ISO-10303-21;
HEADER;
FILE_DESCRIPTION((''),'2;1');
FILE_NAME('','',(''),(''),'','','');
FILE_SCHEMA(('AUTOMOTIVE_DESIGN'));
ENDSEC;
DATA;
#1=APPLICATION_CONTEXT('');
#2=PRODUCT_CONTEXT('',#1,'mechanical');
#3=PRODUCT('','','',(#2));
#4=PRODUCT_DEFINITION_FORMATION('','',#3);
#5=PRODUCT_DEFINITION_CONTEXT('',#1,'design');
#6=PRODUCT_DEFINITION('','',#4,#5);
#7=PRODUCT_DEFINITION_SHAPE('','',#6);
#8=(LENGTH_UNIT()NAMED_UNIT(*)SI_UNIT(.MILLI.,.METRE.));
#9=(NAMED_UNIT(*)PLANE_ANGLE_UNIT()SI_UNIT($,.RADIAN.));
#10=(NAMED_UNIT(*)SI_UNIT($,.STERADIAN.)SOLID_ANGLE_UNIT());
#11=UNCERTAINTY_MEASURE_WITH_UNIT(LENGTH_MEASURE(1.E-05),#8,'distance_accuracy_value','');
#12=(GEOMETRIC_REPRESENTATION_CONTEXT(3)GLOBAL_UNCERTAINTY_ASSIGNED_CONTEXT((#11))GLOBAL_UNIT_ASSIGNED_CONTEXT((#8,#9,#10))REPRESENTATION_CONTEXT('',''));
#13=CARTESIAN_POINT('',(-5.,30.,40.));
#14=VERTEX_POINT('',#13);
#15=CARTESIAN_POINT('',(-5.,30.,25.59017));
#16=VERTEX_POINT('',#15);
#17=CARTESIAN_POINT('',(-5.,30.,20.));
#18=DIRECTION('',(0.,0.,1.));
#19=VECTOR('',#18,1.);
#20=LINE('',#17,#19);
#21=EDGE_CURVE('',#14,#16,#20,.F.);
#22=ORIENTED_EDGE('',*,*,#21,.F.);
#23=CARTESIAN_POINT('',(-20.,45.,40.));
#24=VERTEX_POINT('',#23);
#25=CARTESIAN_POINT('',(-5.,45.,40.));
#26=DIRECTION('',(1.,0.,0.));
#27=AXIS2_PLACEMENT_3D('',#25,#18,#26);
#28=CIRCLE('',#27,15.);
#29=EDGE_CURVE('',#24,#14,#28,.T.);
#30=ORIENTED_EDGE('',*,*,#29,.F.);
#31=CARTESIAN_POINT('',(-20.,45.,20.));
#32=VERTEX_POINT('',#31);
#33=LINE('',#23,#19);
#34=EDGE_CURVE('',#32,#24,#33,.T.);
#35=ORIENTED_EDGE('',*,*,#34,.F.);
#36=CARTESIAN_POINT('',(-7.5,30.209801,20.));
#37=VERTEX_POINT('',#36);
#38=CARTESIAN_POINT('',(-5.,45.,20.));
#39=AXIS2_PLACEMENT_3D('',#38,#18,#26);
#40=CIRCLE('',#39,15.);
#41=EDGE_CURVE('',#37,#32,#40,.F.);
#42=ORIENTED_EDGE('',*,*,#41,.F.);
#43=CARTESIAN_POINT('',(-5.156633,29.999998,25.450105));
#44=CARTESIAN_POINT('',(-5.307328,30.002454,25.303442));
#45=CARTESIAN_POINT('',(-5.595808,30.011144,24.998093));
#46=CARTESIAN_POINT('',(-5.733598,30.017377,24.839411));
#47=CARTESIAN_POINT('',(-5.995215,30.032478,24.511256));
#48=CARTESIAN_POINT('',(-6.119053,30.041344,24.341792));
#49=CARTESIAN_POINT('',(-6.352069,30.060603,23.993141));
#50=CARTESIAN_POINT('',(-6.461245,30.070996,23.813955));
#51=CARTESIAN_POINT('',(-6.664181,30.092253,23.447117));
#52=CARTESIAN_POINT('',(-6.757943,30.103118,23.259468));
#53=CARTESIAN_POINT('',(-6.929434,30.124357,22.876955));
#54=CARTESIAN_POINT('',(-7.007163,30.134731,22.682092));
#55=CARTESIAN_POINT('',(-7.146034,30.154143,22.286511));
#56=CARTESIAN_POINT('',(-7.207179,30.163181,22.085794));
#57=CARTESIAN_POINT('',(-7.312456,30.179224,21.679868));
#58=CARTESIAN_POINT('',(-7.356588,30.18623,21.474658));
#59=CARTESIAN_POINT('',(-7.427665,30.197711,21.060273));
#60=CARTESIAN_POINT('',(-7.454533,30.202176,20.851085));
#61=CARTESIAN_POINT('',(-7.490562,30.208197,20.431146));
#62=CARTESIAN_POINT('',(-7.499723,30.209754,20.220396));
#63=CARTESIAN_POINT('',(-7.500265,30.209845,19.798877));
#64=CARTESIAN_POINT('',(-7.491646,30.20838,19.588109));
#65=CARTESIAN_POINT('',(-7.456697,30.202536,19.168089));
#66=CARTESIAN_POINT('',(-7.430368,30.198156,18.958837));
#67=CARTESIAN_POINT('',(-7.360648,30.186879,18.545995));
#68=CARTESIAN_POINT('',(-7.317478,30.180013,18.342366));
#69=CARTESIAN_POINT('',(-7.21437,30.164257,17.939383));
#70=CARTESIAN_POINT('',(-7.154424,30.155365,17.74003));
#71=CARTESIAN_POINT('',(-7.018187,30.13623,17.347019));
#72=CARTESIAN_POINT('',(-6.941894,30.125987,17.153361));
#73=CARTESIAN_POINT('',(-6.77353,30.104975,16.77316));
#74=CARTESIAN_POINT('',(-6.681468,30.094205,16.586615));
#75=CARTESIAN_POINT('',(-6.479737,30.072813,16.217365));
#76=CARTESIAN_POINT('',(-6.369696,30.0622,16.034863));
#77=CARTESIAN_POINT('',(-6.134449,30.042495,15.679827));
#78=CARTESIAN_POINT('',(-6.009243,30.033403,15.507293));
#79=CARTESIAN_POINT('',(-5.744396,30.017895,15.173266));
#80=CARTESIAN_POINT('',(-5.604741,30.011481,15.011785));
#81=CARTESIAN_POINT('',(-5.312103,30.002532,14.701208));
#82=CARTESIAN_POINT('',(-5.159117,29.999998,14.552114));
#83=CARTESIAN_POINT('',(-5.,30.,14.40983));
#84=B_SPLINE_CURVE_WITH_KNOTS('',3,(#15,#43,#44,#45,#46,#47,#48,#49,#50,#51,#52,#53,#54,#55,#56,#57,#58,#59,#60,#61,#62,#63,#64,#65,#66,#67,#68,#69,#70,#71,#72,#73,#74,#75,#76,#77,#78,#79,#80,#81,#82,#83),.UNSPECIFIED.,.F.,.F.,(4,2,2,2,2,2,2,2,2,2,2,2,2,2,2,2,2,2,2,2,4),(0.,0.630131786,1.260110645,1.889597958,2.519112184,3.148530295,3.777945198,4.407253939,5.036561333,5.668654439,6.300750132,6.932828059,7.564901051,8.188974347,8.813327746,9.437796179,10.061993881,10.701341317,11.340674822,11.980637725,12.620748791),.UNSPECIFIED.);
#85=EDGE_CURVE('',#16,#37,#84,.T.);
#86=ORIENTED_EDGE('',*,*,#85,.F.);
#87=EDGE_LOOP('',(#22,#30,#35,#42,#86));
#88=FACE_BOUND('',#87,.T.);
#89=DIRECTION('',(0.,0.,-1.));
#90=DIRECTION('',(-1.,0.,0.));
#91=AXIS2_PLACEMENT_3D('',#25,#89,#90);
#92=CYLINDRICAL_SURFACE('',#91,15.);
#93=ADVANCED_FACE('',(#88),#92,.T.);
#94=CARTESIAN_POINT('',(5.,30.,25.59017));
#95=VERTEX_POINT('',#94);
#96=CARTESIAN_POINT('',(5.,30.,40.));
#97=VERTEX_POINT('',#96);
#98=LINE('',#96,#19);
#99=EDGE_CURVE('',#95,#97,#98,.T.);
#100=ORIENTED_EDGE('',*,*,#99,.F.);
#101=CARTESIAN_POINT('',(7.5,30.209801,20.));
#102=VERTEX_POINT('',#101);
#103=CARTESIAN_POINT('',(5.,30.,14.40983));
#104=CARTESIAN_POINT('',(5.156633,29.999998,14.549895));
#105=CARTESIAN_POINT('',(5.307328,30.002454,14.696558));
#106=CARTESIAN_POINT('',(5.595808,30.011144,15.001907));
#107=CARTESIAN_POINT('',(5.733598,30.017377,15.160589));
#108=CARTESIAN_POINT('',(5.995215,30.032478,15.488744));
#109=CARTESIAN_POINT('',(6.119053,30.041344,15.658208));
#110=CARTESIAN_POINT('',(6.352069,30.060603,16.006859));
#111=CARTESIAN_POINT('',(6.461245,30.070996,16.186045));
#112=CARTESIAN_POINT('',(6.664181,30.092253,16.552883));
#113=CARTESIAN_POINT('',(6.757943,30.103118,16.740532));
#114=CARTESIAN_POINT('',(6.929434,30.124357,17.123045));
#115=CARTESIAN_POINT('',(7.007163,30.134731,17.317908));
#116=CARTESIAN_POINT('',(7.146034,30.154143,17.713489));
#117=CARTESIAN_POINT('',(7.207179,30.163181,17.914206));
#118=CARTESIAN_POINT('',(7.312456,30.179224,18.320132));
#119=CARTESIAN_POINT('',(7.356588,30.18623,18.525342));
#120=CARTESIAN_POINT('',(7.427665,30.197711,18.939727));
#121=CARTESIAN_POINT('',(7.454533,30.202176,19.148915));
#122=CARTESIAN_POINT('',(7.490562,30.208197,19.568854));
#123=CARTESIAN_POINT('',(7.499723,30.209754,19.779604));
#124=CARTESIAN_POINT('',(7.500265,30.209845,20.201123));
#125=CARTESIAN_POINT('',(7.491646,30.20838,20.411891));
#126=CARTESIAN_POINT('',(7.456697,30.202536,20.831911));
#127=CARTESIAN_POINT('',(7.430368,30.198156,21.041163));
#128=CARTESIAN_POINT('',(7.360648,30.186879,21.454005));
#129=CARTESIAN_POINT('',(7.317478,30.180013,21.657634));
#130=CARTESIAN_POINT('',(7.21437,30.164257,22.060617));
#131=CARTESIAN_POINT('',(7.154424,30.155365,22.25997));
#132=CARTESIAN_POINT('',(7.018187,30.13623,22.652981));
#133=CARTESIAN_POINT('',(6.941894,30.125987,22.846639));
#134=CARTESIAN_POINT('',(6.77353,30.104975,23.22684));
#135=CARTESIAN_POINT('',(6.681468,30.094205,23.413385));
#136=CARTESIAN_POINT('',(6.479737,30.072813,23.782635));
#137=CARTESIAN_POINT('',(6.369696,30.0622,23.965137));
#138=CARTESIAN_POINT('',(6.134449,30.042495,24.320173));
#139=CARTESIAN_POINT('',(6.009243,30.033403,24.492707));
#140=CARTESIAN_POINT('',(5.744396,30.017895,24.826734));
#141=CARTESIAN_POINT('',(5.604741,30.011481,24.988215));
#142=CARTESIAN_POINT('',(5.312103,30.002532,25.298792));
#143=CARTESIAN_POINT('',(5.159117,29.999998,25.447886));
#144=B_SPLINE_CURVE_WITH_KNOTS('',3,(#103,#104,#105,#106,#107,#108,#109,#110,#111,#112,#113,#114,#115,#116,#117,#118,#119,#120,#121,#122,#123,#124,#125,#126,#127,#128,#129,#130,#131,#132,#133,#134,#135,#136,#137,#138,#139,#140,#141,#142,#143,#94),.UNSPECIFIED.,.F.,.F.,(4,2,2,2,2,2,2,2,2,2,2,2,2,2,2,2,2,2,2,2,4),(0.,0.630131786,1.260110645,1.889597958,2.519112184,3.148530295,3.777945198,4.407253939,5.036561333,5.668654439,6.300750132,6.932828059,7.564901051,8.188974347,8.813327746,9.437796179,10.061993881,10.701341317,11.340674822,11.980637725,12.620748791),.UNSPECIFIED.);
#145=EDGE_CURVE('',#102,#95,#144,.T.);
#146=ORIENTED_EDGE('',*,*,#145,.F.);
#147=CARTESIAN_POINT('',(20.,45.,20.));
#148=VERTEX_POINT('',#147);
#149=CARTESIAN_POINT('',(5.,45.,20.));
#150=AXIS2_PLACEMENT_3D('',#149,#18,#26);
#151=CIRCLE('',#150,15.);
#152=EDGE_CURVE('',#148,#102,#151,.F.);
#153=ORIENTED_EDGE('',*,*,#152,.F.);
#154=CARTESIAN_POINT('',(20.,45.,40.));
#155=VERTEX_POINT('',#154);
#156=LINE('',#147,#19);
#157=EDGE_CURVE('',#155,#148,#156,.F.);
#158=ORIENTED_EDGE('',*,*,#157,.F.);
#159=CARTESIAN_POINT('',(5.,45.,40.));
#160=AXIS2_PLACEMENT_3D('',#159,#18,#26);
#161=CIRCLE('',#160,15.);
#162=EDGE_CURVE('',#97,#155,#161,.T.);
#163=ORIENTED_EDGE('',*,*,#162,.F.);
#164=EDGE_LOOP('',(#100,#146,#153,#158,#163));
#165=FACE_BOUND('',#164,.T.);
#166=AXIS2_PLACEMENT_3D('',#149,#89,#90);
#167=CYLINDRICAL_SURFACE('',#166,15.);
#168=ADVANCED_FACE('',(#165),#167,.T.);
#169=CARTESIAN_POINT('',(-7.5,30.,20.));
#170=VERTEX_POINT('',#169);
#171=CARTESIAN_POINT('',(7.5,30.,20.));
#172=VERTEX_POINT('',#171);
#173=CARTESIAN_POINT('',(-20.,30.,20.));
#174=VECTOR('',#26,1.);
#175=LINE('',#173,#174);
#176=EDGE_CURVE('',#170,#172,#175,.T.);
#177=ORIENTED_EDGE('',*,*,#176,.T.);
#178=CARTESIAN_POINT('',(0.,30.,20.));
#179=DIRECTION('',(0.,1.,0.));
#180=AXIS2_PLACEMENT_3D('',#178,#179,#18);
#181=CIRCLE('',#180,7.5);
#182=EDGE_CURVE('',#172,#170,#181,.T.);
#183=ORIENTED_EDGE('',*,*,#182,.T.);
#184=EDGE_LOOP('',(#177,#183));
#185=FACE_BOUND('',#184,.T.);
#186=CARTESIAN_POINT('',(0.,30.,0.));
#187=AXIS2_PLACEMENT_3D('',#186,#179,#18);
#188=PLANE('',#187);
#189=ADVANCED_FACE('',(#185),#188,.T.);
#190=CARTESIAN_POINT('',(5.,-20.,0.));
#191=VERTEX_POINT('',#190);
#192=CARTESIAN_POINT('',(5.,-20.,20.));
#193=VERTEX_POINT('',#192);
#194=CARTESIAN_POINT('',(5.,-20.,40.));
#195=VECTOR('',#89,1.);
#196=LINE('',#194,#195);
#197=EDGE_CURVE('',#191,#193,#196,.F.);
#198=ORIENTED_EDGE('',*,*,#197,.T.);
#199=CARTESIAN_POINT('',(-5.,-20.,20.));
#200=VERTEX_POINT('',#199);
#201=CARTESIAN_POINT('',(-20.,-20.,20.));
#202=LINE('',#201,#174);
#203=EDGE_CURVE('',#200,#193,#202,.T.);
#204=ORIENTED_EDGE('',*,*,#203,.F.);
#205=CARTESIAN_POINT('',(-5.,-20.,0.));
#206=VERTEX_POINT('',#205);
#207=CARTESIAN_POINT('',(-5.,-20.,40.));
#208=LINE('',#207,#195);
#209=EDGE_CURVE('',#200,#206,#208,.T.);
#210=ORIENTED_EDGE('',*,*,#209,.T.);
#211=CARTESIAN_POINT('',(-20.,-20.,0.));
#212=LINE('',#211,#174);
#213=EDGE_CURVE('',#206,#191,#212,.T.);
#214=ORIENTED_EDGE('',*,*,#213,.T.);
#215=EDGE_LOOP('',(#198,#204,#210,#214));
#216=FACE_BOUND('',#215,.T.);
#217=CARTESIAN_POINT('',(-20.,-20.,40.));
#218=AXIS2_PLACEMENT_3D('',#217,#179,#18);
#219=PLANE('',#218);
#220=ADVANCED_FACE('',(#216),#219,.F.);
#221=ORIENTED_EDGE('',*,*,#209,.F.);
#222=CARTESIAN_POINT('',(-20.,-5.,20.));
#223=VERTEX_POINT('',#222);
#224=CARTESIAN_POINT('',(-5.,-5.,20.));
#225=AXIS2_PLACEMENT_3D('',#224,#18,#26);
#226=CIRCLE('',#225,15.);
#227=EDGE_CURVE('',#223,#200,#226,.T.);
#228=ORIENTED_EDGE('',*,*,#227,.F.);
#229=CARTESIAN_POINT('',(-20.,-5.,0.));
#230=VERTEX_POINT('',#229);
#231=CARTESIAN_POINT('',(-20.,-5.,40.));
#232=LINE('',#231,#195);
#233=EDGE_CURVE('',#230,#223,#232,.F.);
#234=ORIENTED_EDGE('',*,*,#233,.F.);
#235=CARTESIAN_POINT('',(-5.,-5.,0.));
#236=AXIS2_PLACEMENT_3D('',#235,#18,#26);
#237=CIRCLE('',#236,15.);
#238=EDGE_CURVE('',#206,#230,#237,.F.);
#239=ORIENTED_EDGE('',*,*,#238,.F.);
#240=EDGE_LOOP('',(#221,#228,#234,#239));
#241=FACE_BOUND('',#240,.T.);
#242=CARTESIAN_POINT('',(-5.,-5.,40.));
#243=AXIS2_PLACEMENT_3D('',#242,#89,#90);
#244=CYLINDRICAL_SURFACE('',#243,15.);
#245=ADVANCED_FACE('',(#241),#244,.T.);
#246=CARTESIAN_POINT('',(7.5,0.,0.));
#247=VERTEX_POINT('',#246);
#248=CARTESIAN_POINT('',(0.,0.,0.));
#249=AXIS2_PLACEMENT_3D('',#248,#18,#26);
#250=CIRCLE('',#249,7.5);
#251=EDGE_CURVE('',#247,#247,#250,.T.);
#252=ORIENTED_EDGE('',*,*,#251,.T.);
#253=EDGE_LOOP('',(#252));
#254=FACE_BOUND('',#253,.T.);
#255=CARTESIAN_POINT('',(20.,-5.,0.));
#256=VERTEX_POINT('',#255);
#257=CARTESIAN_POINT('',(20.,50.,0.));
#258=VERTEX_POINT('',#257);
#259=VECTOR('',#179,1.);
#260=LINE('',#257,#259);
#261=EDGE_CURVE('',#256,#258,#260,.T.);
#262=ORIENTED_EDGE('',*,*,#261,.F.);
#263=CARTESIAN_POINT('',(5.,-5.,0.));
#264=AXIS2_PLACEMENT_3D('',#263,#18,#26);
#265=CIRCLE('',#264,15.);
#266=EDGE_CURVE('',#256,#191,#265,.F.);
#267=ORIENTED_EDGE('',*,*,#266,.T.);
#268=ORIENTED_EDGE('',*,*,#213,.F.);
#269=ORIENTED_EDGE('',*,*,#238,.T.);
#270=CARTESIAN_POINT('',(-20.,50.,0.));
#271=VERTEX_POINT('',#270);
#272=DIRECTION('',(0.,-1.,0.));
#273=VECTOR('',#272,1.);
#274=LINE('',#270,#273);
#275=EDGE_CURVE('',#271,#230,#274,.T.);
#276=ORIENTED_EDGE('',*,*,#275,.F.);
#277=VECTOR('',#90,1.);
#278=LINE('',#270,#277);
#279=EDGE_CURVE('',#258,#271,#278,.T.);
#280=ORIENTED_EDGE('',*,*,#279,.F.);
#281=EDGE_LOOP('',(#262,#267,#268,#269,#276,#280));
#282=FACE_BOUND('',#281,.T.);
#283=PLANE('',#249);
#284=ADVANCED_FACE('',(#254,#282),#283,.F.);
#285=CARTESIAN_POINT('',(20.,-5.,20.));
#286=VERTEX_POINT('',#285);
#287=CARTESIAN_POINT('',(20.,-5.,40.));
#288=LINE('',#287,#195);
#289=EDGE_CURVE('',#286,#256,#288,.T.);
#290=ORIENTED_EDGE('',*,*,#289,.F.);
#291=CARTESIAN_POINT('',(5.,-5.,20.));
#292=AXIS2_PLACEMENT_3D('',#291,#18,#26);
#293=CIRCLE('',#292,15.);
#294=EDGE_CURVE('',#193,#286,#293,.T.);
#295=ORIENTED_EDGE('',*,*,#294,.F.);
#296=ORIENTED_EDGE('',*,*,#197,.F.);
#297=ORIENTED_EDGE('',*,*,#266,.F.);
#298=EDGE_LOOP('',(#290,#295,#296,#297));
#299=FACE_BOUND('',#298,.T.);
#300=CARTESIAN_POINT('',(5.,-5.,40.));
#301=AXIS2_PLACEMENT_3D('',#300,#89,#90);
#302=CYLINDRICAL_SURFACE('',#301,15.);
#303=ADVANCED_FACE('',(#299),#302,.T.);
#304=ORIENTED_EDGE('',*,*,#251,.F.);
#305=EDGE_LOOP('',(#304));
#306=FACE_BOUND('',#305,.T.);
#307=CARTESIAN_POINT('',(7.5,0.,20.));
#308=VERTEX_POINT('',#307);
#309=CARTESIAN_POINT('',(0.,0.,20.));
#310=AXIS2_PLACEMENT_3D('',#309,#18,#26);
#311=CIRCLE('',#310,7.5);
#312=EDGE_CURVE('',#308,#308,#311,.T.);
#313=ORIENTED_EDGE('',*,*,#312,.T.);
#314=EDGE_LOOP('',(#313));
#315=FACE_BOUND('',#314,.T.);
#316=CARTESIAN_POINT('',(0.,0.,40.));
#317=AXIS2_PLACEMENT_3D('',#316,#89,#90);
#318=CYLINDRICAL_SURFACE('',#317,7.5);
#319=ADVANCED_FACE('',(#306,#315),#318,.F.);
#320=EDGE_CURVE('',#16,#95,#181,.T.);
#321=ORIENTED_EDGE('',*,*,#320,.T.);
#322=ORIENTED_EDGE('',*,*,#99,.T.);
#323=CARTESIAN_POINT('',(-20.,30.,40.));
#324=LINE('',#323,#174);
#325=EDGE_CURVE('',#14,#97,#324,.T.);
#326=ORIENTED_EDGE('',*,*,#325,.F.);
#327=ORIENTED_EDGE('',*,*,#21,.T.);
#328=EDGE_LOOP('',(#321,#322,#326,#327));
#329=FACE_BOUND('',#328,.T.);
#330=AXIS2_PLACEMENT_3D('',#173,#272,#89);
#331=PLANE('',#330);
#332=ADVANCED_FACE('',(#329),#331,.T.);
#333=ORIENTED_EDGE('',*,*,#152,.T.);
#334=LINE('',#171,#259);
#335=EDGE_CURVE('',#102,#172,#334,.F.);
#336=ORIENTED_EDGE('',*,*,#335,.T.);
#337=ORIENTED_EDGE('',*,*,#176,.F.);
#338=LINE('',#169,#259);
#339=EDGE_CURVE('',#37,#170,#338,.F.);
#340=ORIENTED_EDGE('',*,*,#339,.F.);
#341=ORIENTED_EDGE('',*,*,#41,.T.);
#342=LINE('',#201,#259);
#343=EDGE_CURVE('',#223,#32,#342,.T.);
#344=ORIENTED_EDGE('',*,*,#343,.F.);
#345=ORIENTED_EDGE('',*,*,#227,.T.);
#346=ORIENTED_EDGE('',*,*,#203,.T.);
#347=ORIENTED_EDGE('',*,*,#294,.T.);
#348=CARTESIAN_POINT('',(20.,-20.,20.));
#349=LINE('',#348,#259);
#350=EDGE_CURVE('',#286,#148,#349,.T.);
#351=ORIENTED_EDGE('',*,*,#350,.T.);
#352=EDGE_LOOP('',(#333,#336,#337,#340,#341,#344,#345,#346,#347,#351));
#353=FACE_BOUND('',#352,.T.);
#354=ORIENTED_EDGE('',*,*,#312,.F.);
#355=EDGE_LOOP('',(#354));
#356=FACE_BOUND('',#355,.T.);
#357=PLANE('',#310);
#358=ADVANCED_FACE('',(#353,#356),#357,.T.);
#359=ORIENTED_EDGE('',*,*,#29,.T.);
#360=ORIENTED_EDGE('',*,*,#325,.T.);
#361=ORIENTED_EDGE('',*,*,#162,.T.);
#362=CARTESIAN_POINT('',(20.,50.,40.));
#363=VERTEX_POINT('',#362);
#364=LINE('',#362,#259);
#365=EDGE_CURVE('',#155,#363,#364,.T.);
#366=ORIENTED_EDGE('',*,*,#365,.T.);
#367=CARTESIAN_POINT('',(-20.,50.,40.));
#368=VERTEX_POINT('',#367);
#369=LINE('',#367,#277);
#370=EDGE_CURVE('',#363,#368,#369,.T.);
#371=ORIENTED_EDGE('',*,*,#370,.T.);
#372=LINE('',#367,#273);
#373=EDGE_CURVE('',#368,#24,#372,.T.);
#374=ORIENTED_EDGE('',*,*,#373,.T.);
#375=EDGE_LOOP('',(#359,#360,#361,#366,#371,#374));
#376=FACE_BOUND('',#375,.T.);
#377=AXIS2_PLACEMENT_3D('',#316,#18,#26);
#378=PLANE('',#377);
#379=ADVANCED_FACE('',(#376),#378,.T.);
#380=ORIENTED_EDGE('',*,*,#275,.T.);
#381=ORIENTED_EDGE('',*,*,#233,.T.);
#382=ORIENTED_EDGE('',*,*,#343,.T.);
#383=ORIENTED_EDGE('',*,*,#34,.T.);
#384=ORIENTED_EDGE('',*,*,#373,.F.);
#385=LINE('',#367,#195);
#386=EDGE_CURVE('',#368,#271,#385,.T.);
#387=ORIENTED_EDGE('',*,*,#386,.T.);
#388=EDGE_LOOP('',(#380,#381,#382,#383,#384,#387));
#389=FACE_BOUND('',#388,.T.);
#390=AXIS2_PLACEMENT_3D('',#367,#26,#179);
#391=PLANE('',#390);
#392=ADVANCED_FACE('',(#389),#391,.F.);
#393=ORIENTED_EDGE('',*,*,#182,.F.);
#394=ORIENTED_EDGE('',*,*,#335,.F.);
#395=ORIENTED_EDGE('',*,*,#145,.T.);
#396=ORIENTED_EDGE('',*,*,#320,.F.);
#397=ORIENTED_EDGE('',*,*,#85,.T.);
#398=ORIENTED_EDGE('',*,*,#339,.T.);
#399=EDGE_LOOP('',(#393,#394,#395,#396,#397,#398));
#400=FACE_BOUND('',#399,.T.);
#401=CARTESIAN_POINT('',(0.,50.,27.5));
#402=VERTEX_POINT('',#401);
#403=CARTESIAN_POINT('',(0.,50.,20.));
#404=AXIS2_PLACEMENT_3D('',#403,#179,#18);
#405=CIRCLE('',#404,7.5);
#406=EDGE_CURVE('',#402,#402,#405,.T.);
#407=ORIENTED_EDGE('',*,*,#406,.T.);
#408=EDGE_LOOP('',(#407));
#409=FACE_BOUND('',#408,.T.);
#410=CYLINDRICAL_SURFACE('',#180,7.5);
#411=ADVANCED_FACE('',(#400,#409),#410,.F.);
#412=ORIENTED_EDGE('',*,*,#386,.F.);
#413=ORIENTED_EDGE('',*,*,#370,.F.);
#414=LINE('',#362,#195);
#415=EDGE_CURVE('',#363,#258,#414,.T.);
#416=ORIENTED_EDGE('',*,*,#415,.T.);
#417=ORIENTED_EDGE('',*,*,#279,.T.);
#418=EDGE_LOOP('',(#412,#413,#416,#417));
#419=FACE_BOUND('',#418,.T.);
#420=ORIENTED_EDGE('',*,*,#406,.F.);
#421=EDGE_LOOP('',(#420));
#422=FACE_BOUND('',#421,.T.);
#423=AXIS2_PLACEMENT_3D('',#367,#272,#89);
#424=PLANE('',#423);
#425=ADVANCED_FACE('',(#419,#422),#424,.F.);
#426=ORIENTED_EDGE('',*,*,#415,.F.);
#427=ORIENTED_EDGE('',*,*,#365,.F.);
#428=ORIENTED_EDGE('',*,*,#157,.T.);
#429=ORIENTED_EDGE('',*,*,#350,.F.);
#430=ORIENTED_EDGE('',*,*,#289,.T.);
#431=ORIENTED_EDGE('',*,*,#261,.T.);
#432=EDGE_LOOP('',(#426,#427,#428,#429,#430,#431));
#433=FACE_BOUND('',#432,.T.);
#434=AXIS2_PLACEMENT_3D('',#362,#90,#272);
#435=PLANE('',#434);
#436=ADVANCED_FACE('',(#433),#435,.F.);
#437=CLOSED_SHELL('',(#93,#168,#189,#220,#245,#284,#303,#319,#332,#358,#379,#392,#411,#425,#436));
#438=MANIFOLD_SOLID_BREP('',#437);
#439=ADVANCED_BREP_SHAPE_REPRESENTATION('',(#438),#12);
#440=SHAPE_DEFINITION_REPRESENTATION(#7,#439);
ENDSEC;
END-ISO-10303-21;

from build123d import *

# Parameters (mm, degrees)
SKETCH1_W           = 40
SKETCH1_H           = 70
SKETCH1_R           = 7.5
BOSS_EXTRUDE1_DEPTH = 40
CUT_EXTRUDE1_DEPTH  = 20
SKETCH3_W           = 40
SKETCH3_H           = 50
CUT_EXTRUDE2_DEPTH  = 20
FILLET1_R           = 15


with BuildPart() as part:
    # Sketch1 → Boss-Extrude1 (new body)
    with BuildSketch(Plane.XY):
        with Locations((0, 15)):
            Rectangle(SKETCH1_W, SKETCH1_H)
        Circle(SKETCH1_R, mode=Mode.SUBTRACT)
    extrude(amount=BOSS_EXTRUDE1_DEPTH)

    # Sketch2 → Cut-Extrude1 (cut)
    with BuildSketch(Plane(origin=(0, 50, 0), x_dir=(1, 0, 0), z_dir=(0, 1, 0))):
        with BuildLine():
            ThreePointArc((7.5, -20), (2.870125743, -13.070903506), (-5.303300859, -14.696699141))
            Line((-5.303300859, -14.696699141), (5.303300859, -25.303300859))
            ThreePointArc((5.303300859, -25.303300859), (6.929096494, -22.870125743), (7.5, -20))
        make_face()
        with BuildLine():
            Line((5.303300859, -25.303300859), (-5.303300859, -14.696699141))
            ThreePointArc((-5.303300859, -14.696699141), (-5.303300859, -25.303300859), (5.303300859, -25.303300859))
        make_face()
    extrude(amount=-CUT_EXTRUDE1_DEPTH, mode=Mode.SUBTRACT)

    # Sketch3 → Cut-Extrude2 (cut)
    with BuildSketch(Plane.XY.offset(40)):
        with Locations((0, 5)):
            Rectangle(SKETCH3_W, SKETCH3_H)
    extrude(amount=-CUT_EXTRUDE2_DEPTH, mode=Mode.SUBTRACT)

    # Fillet1
    # the kernel refuses this fillet: 15 mm, written as the material it takes off along each edge
    with BuildSketch(Plane(origin=(20, -20, -37.5), x_dir=(0, 1, 0), z_dir=(0, 0, 1))) as fillet1_piece_1:
        with BuildLine():
            CenterArc((FILLET1_R, FILLET1_R), FILLET1_R, 180, 90)
            Line((0, FILLET1_R), (0, 0))
            Line((0, 0), (FILLET1_R, 0))
        make_face()
    extrude(amount=95, mode=Mode.SUBTRACT)
    with BuildSketch(Plane(origin=(-20, -20, -37.5), x_dir=(0, 1, 0), z_dir=(0, 0, 1))) as fillet1_piece_2:
        with BuildLine():
            CenterArc((FILLET1_R, -FILLET1_R), FILLET1_R, 90, 90)
            Line((0, -FILLET1_R), (0, 0))
            Line((0, 0), (FILLET1_R, 0))
        make_face()
    extrude(amount=95, mode=Mode.SUBTRACT)
    with BuildSketch(Plane(origin=(-20, 30, 77.5), x_dir=(0, 1, 0), z_dir=(0, 0, -1))) as fillet1_piece_3:
        with BuildLine():
            CenterArc((FILLET1_R, FILLET1_R), FILLET1_R, 180, 90)
            Line((0, FILLET1_R), (0, 0))
            Line((0, 0), (FILLET1_R, 0))
        make_face()
    extrude(amount=57.5, mode=Mode.SUBTRACT)
    with BuildSketch(Plane(origin=(20, 30, 77.5), x_dir=(0, 1, 0), z_dir=(0, 0, -1))) as fillet1_piece_4:
        with BuildLine():
            CenterArc((FILLET1_R, -FILLET1_R), FILLET1_R, 90, 90)
            Line((0, -FILLET1_R), (0, 0))
            Line((0, 0), (FILLET1_R, 0))
        make_face()
    extrude(amount=57.5, mode=Mode.SUBTRACT)


solid = part.part
